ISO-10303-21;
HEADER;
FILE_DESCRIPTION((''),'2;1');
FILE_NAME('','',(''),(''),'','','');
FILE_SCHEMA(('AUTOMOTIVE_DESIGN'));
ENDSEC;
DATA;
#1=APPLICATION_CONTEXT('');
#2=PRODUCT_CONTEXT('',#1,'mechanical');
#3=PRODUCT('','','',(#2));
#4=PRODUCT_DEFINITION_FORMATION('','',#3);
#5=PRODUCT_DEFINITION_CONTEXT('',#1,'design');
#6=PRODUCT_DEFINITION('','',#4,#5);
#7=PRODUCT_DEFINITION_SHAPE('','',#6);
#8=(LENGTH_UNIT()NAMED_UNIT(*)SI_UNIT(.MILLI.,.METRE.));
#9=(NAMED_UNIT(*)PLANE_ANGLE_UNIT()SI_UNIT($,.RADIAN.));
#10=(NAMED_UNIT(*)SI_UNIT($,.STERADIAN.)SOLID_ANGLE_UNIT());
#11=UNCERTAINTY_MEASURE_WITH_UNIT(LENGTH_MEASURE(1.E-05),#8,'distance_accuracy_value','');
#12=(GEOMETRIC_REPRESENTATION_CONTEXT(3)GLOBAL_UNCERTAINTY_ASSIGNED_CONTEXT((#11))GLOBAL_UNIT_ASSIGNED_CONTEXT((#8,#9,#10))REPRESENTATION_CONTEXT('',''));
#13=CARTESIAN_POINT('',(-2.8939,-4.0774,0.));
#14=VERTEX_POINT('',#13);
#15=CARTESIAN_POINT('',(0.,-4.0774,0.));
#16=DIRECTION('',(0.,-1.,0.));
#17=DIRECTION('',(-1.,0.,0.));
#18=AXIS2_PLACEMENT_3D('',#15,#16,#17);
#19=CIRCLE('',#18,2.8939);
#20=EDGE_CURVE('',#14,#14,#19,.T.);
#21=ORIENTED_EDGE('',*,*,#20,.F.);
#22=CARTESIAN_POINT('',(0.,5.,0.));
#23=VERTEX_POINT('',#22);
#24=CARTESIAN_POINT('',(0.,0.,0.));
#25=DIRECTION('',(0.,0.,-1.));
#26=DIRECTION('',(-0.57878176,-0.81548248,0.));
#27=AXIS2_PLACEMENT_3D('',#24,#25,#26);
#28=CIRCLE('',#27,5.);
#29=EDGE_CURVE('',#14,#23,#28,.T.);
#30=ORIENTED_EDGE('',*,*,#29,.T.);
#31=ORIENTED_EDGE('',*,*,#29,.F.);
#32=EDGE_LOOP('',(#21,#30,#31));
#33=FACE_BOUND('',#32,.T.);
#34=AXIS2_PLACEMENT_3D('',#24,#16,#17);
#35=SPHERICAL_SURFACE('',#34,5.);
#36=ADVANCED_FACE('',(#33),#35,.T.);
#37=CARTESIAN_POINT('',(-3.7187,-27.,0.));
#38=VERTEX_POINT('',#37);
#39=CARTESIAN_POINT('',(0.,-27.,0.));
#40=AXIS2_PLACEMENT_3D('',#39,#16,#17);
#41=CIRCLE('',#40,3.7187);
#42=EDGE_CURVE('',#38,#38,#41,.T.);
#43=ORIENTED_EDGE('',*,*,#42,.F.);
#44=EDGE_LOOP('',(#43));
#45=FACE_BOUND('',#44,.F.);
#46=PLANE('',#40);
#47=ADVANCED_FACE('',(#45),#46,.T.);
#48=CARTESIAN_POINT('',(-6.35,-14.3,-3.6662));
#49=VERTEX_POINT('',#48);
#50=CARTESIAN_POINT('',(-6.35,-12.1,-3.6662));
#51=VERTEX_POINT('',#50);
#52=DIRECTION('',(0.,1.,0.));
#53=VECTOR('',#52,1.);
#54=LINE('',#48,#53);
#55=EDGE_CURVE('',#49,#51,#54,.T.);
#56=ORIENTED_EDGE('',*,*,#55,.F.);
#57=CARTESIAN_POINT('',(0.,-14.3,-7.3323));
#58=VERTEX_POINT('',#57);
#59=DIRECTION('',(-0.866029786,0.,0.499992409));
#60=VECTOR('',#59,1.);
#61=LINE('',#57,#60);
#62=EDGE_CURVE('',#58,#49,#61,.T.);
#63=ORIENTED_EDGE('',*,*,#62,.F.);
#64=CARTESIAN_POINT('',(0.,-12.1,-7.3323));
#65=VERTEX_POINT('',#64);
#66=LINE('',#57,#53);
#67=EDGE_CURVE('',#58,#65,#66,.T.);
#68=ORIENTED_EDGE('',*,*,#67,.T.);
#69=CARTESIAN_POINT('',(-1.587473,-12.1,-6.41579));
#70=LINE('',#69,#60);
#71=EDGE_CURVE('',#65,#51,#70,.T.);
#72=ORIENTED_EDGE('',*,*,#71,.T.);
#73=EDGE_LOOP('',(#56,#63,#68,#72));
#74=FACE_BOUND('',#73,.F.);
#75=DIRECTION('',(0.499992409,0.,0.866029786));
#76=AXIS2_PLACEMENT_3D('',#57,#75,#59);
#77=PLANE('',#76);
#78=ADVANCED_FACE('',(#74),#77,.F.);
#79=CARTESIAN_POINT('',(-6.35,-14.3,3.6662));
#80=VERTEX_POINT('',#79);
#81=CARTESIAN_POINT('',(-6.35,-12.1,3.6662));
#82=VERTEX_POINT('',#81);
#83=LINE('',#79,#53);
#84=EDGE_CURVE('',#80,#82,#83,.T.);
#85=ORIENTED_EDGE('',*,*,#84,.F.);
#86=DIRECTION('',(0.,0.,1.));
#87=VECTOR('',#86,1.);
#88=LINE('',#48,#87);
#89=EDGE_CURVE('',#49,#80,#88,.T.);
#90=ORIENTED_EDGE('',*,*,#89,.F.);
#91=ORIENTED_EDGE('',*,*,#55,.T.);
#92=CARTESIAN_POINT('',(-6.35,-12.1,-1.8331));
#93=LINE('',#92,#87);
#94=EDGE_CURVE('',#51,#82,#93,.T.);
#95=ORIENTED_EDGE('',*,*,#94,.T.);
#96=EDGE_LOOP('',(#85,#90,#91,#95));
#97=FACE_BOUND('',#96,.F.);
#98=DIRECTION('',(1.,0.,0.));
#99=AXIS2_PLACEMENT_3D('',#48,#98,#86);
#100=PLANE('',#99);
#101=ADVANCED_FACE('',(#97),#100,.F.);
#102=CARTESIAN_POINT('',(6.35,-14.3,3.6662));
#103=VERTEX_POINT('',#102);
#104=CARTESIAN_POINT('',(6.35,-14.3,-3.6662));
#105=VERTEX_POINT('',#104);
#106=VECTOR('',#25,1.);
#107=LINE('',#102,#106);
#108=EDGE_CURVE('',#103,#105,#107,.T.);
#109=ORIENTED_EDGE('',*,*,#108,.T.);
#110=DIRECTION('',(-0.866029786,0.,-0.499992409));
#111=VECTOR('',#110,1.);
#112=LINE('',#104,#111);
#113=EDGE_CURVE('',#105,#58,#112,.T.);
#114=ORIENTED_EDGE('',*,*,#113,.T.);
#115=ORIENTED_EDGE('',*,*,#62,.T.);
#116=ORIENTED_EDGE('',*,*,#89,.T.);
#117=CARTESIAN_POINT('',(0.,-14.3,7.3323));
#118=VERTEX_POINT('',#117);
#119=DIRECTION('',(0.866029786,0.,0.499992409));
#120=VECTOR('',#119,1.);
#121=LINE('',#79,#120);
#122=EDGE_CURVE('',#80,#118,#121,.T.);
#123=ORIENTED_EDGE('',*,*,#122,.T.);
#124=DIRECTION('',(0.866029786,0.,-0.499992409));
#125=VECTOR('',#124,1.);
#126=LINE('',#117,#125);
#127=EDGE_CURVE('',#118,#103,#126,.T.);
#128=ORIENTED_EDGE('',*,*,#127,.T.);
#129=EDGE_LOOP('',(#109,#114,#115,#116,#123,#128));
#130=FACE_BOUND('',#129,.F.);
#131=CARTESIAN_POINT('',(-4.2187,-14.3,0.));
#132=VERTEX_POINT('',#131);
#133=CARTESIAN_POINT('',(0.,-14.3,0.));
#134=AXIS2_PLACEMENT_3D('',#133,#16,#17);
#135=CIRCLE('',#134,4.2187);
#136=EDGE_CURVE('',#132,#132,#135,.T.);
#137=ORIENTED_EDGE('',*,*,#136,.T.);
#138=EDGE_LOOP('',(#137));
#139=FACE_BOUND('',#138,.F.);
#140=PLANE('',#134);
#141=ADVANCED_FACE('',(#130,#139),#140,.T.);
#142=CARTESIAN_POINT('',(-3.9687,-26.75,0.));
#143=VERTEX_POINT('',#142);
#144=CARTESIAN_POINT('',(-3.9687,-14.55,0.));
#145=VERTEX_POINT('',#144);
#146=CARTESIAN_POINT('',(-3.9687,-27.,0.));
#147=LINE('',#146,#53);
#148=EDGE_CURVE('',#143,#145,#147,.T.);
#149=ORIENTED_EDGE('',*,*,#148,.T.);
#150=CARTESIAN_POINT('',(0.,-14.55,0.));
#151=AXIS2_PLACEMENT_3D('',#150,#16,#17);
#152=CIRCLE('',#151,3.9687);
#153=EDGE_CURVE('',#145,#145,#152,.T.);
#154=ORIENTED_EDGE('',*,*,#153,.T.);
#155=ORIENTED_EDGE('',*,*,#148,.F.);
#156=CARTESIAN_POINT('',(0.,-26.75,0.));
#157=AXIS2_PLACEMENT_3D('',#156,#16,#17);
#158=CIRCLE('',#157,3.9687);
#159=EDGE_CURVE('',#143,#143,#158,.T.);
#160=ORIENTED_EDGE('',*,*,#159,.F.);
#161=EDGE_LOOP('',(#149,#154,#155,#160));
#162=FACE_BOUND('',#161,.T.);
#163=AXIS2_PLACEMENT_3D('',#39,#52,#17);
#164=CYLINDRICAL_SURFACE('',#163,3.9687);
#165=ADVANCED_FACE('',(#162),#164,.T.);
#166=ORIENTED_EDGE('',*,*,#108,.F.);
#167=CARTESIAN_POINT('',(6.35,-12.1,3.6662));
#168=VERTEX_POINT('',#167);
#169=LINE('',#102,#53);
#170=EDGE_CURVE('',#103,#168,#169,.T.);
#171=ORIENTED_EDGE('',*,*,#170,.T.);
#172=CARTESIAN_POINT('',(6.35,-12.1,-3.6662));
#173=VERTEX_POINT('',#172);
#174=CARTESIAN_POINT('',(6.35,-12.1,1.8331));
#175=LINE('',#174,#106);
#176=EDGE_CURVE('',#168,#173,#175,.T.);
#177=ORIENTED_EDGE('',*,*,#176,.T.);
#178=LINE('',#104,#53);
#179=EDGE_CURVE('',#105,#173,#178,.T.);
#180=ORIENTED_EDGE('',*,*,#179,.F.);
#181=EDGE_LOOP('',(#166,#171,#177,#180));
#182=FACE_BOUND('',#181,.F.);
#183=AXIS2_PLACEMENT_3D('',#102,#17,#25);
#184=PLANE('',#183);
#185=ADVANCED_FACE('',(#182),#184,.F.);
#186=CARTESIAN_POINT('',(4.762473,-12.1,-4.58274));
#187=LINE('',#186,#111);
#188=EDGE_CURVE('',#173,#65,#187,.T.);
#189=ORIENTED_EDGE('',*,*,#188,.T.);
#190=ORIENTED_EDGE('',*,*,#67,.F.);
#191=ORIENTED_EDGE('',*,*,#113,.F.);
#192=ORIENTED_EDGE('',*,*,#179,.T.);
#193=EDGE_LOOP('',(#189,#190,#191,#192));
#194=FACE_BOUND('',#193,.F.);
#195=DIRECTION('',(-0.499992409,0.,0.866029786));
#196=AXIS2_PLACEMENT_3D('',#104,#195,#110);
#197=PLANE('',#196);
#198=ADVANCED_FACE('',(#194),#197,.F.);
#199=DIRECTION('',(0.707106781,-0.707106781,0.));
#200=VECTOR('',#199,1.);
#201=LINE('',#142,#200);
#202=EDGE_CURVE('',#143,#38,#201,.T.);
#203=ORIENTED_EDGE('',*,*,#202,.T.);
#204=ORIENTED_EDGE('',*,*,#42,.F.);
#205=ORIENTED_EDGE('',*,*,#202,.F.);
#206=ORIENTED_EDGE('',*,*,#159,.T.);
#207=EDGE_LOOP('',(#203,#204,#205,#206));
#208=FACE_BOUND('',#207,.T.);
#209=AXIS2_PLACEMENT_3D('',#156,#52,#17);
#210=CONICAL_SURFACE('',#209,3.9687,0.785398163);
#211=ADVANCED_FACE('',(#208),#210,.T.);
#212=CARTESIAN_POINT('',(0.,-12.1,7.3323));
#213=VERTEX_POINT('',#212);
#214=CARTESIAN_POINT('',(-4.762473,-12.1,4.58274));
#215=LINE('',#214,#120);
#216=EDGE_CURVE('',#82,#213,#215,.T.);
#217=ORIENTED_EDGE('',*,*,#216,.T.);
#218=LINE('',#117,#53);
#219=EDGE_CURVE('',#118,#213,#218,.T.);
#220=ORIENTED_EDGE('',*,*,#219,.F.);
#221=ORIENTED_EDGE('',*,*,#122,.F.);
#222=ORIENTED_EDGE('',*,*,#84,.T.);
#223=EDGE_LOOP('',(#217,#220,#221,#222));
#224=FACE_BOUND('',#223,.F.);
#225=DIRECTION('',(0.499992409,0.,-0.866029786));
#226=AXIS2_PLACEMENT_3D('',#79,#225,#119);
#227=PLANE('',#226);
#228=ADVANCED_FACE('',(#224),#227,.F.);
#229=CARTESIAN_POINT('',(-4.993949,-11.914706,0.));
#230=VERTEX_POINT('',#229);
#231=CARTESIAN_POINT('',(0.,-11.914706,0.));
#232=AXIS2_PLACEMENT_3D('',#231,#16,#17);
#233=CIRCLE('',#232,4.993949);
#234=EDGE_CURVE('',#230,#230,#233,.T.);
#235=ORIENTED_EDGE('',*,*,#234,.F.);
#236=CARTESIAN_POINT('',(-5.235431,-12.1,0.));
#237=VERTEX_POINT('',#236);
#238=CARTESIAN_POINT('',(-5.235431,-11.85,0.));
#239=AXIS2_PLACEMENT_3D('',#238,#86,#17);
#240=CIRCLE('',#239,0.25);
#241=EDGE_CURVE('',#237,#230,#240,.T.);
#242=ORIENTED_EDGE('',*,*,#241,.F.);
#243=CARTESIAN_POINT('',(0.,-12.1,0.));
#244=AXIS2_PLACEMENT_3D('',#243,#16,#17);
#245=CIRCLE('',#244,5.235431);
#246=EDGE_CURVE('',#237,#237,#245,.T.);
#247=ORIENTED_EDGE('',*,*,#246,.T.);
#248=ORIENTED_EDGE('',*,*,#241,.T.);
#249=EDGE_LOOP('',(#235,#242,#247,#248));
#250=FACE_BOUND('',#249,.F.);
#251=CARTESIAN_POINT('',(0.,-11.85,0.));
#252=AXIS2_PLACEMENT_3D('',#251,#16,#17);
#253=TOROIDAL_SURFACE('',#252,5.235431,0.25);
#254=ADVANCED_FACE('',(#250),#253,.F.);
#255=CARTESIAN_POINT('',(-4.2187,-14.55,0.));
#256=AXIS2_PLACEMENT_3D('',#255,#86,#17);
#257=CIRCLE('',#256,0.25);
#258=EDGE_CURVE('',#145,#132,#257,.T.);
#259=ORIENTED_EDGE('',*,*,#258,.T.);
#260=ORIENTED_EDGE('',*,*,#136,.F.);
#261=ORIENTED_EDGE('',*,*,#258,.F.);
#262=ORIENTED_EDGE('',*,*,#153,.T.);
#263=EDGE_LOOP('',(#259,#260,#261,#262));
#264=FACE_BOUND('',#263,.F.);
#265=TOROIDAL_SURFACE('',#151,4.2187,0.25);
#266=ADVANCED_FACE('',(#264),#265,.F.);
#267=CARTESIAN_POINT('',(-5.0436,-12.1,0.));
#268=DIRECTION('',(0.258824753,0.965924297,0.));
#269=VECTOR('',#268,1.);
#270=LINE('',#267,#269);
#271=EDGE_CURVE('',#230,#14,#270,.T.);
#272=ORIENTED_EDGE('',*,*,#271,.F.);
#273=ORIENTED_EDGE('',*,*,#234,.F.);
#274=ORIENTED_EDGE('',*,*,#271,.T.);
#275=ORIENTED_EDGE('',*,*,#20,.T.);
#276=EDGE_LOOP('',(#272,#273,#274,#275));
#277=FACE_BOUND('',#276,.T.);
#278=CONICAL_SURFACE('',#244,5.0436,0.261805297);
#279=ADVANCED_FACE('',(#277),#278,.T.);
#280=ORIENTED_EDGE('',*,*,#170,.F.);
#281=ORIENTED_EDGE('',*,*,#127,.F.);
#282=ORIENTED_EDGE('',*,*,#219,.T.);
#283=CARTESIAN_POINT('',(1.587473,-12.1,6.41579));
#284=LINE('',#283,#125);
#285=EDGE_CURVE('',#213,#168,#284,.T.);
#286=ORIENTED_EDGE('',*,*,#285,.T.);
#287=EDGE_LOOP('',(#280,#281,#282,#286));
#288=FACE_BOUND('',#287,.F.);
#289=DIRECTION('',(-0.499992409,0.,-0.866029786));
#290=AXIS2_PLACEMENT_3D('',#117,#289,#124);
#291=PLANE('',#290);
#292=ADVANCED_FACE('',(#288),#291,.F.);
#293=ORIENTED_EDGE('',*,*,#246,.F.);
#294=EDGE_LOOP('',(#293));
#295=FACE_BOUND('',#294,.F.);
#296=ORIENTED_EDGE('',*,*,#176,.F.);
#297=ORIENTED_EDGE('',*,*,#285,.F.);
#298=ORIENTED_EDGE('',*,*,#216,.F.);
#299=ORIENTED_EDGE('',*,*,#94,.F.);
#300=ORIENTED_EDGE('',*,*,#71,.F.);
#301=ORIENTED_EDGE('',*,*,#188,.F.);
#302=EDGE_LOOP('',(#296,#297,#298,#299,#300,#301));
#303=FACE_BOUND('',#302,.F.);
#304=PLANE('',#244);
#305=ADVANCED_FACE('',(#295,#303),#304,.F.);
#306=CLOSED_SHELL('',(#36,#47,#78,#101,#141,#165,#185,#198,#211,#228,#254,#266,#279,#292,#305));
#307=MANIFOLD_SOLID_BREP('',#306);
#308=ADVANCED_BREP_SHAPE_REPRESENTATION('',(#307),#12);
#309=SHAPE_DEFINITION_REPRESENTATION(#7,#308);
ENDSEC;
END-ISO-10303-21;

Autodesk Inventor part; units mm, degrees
ref_plane "YZ Plane" through (0, 0, 0) normal (1, 0, 0) x (0, 1, 0)
ref_plane "XZ Plane" through (0, 0, 0) normal (0, 1, 0) x (-1, 0, 0)
ref_plane "XY Plane" through (0, 0, 0) normal (0, 0, 1) x (1, 0, 0)
sketch "Sketch1" plane through (0, 0, 0) normal (0, 0, 1) x (1, 0, 0)
  circle A0 centre (0, 0) radius 5
  line L0 (3.9688, -27) -> (-3.9687, -27)
  line L1 (-3.9687, -27) -> (-3.9687, 0)
  line L2 (-3.9687, 0) -> (3.9687, 0)
  line L3 (3.9687, 0) -> (3.9688, -27)
  line L4 (3.9688, -27) -> (-3.9687, 0) construction
  line L5 (-3.9687, -27) -> (3.9687, 0) construction
  line L6 (10, -14.3) -> (-10, -14.3)
  line L7 (-10, -14.3) -> (-10, -12.1)
  line L8 (-10, -12.1) -> (10, -12.1)
  line L9 (10, -12.1) -> (10, -14.3)
  line L10 (10, -14.3) -> (-10, -12.1) construction
  line L11 (-10, -14.3) -> (10, -12.1) construction
  line L12 (-5.0436, -12.1) -> (-2.8939, -4.0774)
  line L13 (2.8939, -4.0774) -> (5.0436, -12.1)
  line L14 (-5.0436, -12.1) -> (5.0436, -12.1) construction
  line L15 (0, 5) -> (0, -27)
  point P0 (0, -13.5)
  point P1 (0, -13.2)
  point P2 (-3.9688, -8.0887)
  point P3 (0, -12.1)
  point P4 (-3.9687, -14.3)
  dimension "d0" = 10
  dimension "d1" = 7.9375
  dimension "d2" = 32
  dimension "d3" = 20
  dimension "d4" = 12.7
  dimension "d5" = 30
  dimension "d6" = 2.2
revolve "Revolution1" add sketch "Sketch1" angle 360 about axis through (0, 5, 0) along (0, -1, 0) contours L15 L2 L1 A0 | L1 L2 L15 A0 | A0 L15 L8 L1 L12 | L1 L8 L12 | L8 L15 L6 L1 | L1 L6 L7 L8 | L6 L15 L0 L1
sketch "Sketch2" plane through (0, -14.3, 0) normal (0, -1, 0) x (1, 0, 0)
  circle A0 centre (0, 0) radius 2.8939 projected
  line L0 (-6.35, 3.6662) -> (0, 7.3323)
  line L1 (0, 7.3323) -> (6.35, 3.6662)
  line L2 (6.35, 3.6662) -> (6.35, -3.6662)
  line L3 (6.35, -3.6662) -> (0, -7.3323)
  line L4 (0, -7.3323) -> (-6.35, -3.6662)
  line L5 (-6.35, -3.6662) -> (-6.35, 3.6662)
  circle A1 centre (0, 0) radius 3.9687 projected
  circle A2 centre (0, 0) radius 10 projected
  point P0 (0, 0)
  dimension "d8" = 12.7
extrude "Extrusion1" cut sketch "Sketch2" against normal through all contours A2
chamfer "Chamfer1" distance 0.25 angle 45 1 edges at (3.9688, -27, 0)
fillet "Fillet1" radius 0.25 1 edges at (3.9688, -14.3, 0)
fillet "Fillet2" radius 0.25 1 edges at (5.0436, -12.1, 0)
thread "Thread1" size "5/16-18 UNC" class "2A" standard "ANSI Unified Screw Threads" length 10
properties part number "Gas Strut Ball Stud" material "Stainless Steel"
